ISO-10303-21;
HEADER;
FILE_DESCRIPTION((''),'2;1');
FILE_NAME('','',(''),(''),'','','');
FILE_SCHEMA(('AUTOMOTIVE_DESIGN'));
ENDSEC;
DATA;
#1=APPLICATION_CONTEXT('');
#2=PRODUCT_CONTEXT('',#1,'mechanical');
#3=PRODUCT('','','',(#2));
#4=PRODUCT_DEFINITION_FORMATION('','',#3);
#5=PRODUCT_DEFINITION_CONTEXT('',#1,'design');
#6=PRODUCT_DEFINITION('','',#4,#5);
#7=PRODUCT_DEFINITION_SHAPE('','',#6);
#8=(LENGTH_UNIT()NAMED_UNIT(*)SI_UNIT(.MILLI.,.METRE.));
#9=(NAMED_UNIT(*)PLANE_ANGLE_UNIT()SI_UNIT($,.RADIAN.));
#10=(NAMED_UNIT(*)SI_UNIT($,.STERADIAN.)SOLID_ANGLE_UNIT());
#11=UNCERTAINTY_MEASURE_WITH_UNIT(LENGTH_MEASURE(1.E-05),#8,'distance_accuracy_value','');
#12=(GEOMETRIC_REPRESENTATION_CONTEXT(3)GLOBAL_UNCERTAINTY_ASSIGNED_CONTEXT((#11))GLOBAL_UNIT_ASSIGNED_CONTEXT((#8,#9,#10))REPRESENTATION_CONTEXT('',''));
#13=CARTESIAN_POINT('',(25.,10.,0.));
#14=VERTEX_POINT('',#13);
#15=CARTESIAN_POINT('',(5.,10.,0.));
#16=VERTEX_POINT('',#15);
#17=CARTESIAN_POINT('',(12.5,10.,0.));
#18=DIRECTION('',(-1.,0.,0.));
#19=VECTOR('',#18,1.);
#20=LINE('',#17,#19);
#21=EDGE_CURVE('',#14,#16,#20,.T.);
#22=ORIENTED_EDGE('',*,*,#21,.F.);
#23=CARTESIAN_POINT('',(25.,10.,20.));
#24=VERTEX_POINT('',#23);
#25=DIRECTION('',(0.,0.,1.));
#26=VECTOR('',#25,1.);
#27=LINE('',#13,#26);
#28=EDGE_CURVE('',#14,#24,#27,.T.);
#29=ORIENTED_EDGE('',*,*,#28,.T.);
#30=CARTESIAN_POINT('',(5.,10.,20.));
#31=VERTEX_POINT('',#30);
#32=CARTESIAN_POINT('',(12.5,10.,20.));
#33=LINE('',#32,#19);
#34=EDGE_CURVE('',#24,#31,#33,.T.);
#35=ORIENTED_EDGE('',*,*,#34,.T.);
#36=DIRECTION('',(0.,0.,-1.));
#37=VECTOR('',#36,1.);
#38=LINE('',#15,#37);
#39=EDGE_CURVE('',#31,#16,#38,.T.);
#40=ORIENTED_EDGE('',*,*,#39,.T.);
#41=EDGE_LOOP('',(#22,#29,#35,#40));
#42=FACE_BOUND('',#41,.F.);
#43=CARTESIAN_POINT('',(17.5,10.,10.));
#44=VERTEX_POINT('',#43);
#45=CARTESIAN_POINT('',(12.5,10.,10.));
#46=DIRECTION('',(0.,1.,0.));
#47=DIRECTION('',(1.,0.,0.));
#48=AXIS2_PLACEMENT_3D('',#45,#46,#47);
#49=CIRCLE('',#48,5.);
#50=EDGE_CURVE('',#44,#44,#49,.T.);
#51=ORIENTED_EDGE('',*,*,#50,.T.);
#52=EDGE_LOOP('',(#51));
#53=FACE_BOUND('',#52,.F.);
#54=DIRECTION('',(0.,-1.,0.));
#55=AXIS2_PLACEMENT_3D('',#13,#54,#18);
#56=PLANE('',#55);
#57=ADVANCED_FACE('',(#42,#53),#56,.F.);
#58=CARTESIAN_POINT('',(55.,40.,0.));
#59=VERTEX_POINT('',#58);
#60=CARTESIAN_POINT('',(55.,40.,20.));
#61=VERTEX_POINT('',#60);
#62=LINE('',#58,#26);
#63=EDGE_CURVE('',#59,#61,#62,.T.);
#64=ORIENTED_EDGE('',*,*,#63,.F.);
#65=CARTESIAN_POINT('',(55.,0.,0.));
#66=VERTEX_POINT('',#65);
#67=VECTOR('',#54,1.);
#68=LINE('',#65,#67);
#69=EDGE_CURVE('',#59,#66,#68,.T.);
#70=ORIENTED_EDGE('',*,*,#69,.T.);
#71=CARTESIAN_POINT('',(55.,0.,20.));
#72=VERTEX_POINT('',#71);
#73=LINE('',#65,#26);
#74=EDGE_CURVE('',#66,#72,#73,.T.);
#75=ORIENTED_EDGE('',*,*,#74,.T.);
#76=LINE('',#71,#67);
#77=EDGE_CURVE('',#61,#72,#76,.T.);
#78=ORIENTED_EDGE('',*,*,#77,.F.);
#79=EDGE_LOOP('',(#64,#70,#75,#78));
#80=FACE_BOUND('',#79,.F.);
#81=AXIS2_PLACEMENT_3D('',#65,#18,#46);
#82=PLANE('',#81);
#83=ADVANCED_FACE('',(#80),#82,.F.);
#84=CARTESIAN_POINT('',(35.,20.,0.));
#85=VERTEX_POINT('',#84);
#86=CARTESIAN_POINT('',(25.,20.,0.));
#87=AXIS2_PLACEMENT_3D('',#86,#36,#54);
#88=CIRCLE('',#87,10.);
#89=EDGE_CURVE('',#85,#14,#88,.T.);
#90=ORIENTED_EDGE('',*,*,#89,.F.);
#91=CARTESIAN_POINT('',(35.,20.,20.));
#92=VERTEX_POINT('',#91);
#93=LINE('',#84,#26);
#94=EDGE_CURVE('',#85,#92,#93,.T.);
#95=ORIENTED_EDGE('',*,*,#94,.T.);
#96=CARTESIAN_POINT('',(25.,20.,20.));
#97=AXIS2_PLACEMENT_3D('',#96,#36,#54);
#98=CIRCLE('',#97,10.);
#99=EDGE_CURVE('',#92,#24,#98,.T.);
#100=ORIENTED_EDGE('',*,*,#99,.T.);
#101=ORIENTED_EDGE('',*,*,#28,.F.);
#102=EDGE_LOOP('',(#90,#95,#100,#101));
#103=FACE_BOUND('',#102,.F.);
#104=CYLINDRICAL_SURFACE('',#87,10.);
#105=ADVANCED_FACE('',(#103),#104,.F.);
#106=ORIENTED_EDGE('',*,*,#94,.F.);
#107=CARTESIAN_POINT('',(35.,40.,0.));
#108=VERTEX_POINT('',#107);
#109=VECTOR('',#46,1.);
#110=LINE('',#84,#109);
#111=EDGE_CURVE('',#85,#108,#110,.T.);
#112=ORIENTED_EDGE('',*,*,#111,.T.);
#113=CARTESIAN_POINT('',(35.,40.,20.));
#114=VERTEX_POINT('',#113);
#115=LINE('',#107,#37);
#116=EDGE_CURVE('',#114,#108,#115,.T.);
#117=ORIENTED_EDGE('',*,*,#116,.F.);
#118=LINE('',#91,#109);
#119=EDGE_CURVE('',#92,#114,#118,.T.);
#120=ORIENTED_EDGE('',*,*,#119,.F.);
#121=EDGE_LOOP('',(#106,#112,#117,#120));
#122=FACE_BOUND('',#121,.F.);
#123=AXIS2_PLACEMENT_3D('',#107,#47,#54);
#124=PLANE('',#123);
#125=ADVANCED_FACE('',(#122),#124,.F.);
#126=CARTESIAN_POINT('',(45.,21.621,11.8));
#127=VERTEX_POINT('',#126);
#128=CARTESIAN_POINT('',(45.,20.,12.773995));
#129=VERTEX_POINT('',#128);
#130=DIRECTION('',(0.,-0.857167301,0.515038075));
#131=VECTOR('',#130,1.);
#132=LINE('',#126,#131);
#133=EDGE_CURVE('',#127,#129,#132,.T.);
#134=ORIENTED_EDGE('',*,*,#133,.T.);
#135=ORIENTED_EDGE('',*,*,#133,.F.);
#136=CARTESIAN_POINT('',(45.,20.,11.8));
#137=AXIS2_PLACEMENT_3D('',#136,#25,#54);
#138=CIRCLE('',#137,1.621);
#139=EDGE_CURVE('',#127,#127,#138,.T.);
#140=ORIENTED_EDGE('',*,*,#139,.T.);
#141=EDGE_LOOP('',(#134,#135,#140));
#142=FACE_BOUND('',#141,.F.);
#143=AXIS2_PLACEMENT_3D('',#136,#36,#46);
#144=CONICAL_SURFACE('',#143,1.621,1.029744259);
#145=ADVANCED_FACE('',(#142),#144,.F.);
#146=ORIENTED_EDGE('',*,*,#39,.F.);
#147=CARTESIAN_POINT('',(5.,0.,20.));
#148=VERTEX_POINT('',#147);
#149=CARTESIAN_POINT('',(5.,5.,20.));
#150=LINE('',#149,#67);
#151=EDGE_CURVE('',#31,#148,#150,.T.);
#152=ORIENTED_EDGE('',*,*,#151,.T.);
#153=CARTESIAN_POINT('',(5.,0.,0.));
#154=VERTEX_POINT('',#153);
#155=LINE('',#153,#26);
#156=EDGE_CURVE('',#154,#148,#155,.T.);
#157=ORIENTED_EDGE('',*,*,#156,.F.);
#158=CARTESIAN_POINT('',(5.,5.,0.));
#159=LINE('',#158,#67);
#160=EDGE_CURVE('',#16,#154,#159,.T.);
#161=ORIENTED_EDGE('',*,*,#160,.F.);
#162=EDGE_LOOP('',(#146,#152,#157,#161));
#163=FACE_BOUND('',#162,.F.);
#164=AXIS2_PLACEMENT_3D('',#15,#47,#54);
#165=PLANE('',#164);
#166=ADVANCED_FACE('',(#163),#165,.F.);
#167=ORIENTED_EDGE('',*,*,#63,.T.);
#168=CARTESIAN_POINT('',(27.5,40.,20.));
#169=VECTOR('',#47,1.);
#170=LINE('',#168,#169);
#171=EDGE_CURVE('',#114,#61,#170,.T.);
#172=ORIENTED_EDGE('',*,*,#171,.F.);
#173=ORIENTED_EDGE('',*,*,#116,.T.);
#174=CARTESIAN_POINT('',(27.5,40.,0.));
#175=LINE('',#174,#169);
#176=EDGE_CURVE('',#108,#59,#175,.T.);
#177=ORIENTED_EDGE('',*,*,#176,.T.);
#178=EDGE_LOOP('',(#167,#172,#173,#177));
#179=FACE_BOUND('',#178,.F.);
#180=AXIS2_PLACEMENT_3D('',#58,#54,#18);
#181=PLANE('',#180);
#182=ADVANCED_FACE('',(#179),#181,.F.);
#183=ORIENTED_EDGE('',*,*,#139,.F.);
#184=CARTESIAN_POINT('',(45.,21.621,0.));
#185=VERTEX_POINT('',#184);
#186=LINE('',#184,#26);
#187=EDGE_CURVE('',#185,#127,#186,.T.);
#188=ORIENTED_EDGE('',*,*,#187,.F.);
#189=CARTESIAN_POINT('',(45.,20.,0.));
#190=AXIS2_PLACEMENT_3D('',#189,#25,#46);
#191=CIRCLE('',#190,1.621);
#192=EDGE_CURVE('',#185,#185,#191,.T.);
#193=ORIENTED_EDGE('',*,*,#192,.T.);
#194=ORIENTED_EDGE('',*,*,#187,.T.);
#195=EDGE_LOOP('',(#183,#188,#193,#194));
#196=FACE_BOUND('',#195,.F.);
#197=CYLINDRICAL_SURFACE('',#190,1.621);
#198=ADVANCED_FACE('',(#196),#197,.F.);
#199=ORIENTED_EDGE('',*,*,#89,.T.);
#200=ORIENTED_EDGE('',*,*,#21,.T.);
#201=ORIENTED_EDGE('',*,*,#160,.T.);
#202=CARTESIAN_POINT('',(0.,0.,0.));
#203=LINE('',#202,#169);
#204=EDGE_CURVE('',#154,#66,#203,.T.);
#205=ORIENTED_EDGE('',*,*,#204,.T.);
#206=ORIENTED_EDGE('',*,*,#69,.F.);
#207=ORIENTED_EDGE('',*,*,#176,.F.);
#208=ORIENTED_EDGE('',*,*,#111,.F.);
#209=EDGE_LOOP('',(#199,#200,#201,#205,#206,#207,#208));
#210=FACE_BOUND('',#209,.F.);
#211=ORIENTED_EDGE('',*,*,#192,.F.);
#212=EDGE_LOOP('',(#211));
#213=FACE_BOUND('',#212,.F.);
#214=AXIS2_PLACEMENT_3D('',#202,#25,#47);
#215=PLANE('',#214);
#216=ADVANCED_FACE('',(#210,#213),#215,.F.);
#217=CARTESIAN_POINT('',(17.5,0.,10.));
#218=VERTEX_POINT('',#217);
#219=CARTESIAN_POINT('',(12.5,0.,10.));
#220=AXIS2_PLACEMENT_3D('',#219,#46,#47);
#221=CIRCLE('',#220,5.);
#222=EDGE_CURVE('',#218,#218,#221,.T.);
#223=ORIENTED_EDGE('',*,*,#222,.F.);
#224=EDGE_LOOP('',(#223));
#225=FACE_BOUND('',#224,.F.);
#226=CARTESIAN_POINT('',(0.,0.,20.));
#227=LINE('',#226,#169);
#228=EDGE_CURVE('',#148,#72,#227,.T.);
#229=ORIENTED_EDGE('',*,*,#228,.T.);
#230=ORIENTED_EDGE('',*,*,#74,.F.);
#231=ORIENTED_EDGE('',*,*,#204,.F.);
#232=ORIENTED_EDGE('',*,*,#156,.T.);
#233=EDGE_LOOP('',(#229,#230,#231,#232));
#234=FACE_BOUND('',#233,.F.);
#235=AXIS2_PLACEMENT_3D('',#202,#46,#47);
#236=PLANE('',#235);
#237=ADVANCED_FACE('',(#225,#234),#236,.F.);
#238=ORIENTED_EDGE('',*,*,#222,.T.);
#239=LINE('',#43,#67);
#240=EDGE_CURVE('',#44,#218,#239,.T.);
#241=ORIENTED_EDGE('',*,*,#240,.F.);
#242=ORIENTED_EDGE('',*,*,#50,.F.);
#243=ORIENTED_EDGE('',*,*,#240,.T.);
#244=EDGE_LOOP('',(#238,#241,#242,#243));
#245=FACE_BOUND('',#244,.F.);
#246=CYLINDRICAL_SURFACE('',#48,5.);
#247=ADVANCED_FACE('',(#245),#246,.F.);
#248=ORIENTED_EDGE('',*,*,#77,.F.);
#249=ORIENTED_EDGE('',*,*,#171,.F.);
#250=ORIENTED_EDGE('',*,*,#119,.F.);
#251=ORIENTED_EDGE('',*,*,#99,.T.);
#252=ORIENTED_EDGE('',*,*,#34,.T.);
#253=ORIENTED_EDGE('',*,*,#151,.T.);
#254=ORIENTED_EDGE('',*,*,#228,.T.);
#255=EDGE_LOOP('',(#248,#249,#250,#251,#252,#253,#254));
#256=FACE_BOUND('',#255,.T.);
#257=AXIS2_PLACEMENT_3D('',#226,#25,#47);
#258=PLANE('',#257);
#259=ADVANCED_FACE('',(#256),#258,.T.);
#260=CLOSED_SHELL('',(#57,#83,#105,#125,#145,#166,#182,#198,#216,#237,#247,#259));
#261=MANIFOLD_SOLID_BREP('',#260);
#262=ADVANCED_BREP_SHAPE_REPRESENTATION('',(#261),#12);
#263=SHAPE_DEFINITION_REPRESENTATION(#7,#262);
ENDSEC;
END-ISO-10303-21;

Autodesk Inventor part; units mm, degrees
ref_plane "YZ Plane" through (0, 0, 0) normal (1, 0, 0) x (0, 1, 0)
ref_plane "XZ Plane" through (0, 0, 0) normal (0, 1, 0) x (-1, 0, 0)
ref_plane "XY Plane" through (0, 0, 0) normal (0, 0, 1) x (1, 0, 0)
sketch "Bracket Short" plane through (0, 0, 0) normal (0, 0, 1) x (1, 0, 0)
  line L0 (0, 0) -> (30, 0)
  line L1 (25, 10) -> (0, 10)
  line L2 (0, 10) -> (0, 0)
  line L3 (30, 0) -> (55, 0)
  line L4 (55, 0) -> (55, 40)
  line L5 (55, 40) -> (35, 40)
  line L6 (35, 40) -> (35, 20)
  arc A0 (25, 10) -> (35, 20) centre (25, 20) ccw
  point P0 (35, 10)
  dimension "d0" = 35
  dimension "d2" = 20
  dimension "d3" = 40
  dimension "d4" = 10
  dimension "d10" = 10
extrude "Extrusion1" add sketch "Bracket Short" along normal blind 20
sketch "Clearance Hole (M6-8)" plane through (0, 10, 0) normal (0, 1, 0) x (1, 0, 0)
  circle A0 centre (12.5, -10) radius 5
  point P0 (0, 0)
  dimension "d7" = 10
extrude "Extrusion2" cut sketch "Clearance Hole (M6-8)" against normal through all
sketch "Sketch3" plane through (0, 0, 0) normal (0, 0, -1) x (-1, 0, 0)
  circle A0 centre (-45, 20) radius 2
  point P0 (0, 0)
  dimension "d15" = 4
hole "Hole1" at (45, 20, 0) direction (0, 0, 1) diameter 3.242 depth 11.8 tip angle 118 thread size "M4x0.7" class "6H" standard "ANSI Metric M Profile"
move faces "Move1" translate (5, 0, 0) faces at (0, 6.6667, 6.6667)
properties part number "Bracket_Short" material "Aluminum, Anodized Silver"
